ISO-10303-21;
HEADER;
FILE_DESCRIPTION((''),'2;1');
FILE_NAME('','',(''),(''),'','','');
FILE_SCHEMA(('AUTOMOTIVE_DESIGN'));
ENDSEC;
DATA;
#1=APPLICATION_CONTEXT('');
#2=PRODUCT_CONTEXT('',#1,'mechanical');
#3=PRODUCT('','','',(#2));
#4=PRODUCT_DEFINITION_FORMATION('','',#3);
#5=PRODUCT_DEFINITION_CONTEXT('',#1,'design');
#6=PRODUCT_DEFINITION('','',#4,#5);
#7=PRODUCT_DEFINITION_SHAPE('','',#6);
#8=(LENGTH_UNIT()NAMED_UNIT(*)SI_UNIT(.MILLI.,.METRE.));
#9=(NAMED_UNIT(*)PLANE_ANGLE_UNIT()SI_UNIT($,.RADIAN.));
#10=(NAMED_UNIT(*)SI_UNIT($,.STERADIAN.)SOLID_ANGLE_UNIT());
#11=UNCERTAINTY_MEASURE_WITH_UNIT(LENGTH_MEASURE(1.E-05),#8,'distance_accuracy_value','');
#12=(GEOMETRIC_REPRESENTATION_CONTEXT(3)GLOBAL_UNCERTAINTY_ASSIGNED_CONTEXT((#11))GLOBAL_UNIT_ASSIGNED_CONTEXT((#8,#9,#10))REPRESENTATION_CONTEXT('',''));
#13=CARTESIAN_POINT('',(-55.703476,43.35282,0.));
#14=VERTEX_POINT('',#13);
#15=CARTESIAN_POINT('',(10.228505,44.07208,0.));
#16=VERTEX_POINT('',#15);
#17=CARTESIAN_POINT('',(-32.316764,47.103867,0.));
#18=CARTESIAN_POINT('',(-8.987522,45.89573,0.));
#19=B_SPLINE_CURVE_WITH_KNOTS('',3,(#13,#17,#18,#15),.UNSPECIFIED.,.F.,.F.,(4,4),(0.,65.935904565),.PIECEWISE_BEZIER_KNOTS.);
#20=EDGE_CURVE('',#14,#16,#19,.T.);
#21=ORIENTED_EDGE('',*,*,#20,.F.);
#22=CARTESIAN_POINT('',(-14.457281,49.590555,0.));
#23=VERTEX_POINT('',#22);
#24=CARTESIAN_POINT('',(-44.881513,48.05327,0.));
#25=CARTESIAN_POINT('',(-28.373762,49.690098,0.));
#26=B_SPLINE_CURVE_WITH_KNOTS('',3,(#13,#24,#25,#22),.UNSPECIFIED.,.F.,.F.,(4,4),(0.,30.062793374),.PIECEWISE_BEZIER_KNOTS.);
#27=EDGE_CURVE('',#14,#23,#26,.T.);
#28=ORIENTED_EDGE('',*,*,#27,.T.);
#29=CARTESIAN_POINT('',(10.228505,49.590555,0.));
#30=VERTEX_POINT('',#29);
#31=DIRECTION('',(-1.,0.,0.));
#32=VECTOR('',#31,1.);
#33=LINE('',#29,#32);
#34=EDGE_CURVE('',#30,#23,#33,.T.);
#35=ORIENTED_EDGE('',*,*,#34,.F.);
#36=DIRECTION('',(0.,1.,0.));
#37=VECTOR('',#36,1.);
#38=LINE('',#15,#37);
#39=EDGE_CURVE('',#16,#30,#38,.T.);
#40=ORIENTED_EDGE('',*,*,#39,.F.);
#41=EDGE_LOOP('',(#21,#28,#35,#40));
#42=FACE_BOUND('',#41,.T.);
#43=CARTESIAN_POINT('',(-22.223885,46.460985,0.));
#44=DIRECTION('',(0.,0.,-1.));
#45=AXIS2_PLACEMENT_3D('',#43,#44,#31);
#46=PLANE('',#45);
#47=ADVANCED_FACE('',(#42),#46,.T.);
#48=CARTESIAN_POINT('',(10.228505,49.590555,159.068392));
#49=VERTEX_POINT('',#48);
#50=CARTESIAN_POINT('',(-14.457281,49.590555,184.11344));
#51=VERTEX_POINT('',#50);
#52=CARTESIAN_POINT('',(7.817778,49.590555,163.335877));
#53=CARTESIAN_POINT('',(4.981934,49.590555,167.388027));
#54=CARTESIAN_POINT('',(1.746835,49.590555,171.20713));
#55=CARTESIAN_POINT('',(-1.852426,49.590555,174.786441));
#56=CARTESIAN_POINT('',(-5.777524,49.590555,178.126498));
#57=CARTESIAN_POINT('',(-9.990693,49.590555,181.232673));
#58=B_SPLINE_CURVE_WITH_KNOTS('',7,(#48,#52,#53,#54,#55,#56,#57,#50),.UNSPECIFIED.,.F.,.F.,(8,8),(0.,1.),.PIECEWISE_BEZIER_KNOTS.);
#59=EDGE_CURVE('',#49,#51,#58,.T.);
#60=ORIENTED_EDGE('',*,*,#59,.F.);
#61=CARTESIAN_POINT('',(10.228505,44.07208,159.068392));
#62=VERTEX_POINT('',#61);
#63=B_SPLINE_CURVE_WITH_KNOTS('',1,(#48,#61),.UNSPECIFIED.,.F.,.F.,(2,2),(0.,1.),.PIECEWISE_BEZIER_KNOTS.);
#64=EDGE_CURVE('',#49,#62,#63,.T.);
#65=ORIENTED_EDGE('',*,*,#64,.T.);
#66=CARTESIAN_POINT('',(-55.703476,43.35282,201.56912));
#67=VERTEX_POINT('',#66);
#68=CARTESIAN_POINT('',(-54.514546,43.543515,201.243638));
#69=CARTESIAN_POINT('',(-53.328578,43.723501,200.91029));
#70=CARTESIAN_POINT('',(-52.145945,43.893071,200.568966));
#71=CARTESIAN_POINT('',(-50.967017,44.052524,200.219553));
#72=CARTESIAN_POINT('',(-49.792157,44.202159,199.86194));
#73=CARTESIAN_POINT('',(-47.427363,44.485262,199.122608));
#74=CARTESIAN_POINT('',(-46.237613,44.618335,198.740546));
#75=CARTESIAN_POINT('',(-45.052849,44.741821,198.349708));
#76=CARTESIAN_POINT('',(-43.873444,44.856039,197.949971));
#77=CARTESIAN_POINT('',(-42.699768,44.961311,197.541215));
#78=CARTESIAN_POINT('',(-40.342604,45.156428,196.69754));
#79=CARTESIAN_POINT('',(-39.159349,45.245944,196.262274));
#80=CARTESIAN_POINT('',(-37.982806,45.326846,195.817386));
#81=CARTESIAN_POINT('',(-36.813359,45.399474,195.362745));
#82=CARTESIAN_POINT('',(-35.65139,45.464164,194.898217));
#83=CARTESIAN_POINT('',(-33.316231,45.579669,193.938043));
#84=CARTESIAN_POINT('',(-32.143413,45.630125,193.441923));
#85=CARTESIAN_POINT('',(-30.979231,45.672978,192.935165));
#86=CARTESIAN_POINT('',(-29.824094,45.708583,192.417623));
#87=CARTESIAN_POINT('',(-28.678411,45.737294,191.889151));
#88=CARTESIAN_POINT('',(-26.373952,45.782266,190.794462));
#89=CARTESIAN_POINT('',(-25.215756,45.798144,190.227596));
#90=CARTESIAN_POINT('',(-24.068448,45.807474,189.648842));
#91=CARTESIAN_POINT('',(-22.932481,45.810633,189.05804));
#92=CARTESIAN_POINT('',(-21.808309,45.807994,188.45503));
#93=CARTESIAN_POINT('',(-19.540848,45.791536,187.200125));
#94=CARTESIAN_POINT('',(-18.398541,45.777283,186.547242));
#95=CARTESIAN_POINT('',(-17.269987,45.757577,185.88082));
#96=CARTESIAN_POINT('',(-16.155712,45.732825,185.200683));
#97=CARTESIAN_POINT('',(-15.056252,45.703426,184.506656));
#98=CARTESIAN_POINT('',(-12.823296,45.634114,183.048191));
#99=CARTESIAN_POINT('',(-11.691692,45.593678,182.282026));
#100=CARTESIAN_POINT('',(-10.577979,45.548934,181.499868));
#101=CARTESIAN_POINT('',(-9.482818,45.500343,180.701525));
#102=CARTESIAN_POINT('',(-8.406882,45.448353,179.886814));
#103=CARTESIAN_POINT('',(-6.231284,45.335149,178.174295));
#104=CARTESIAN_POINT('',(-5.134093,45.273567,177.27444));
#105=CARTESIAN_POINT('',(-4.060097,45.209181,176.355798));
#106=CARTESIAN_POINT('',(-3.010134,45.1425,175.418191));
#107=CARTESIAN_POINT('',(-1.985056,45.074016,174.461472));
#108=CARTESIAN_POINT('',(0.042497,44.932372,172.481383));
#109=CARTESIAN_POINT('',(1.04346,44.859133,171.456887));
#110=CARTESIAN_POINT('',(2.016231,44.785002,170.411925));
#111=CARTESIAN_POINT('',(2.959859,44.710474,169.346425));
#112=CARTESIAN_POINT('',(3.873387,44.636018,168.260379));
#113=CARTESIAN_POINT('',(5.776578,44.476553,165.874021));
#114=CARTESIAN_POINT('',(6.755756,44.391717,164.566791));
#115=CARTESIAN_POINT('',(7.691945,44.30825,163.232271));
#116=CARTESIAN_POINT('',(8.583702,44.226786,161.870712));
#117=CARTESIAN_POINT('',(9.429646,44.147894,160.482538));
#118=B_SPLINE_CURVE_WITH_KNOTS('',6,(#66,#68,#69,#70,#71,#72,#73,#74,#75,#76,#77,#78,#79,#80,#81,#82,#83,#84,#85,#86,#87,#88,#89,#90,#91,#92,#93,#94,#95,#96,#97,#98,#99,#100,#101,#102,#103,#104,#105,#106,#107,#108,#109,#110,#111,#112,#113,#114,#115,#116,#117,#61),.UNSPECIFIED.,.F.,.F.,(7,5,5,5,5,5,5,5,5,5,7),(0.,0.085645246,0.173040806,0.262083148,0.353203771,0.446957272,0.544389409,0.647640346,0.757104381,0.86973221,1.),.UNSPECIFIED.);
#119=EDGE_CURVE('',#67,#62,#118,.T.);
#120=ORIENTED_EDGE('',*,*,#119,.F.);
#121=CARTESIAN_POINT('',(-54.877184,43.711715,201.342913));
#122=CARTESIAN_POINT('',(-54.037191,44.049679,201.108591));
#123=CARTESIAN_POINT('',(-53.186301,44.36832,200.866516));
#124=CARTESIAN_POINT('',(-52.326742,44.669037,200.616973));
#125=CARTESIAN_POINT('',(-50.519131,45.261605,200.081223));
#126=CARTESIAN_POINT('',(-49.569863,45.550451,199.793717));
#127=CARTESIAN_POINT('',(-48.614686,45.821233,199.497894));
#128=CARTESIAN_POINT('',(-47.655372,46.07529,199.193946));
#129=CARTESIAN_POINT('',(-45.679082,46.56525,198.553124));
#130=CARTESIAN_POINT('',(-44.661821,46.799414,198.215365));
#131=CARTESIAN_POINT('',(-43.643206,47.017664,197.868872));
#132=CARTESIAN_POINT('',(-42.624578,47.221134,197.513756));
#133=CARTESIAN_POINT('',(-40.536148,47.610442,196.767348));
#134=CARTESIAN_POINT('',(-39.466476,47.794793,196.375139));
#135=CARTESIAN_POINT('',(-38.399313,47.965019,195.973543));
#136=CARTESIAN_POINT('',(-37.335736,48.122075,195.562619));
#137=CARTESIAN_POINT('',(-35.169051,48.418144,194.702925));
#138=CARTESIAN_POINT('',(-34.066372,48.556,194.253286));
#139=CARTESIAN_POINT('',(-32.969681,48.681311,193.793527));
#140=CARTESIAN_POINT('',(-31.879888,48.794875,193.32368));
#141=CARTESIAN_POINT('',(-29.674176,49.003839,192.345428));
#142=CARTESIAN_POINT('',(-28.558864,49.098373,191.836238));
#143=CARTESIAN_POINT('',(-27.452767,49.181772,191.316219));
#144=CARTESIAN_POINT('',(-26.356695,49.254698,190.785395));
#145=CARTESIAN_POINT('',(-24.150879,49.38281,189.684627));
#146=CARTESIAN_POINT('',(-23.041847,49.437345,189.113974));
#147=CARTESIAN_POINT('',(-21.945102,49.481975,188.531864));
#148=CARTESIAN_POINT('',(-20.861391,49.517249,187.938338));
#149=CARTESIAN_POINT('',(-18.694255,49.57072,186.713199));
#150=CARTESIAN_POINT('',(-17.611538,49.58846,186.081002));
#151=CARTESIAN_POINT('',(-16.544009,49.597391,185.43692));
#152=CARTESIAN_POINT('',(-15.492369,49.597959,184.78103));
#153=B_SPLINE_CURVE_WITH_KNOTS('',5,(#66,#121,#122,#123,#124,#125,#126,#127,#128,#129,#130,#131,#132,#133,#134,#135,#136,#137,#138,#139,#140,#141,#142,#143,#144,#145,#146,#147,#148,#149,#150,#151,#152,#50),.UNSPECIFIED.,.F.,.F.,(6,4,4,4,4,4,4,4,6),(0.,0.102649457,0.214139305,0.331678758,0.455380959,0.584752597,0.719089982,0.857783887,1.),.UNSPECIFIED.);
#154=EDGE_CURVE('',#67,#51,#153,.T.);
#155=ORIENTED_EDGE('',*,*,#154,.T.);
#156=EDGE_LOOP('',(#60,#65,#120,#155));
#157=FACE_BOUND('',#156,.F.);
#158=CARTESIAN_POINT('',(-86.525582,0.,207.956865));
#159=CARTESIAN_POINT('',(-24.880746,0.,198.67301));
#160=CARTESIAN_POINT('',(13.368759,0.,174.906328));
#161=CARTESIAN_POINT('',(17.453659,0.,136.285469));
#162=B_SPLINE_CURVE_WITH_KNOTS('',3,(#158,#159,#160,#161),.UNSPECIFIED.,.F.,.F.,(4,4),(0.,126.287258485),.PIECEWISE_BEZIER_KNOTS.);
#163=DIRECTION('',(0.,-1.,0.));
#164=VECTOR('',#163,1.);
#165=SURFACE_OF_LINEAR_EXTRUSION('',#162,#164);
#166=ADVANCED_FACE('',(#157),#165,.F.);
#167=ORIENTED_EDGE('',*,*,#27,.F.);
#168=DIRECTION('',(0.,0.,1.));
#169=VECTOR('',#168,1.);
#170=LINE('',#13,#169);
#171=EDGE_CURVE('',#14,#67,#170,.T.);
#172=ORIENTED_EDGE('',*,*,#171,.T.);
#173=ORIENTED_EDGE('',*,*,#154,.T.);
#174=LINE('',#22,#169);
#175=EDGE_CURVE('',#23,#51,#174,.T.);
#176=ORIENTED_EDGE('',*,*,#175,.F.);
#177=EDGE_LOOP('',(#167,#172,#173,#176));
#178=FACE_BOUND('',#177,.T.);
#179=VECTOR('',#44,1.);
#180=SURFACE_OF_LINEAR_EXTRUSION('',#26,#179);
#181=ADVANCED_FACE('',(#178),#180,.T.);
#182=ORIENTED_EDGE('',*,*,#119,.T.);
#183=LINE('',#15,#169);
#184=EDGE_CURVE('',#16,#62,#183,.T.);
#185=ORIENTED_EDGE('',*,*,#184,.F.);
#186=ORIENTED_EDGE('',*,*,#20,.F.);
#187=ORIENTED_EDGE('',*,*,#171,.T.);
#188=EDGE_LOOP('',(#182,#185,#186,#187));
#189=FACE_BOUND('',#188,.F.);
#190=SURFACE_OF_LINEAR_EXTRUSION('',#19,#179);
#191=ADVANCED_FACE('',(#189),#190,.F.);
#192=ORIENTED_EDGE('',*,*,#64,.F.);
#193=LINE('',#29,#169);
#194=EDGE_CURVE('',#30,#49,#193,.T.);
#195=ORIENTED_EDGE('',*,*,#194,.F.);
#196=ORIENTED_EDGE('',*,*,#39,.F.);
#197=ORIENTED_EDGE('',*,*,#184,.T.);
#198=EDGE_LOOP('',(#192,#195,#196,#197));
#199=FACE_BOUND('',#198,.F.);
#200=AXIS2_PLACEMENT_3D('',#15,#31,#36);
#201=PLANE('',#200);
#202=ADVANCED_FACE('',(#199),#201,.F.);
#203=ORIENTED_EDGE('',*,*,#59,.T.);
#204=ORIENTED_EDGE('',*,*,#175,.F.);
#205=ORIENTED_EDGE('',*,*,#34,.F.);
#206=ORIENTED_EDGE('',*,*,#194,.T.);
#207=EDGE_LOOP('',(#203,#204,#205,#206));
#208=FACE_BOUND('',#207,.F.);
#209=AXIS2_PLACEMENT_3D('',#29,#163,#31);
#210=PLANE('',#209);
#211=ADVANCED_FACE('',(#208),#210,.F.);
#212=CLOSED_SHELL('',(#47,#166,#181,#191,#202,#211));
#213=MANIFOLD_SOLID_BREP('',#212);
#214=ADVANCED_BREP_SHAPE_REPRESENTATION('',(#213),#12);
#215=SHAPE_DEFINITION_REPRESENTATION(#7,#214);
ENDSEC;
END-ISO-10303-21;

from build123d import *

# Parameters (mm, degrees)
F1_DEPTH = 203.2
F3_DEPTH = 156.21


with BuildPart() as f1:
    # F0 (on Top) → F1 (new body)
    with BuildSketch(Plane.XY):
        with BuildLine():
            add(Edge.make_bspline(
                [(-55.7034760714, 43.3528199792), (-44.8815132724, 48.0532698058), (-28.3737618921, 49.6900983133), (-14.4572808843, 49.5905550092)],
                knots=[0, 0, 0, 0, 30.0627933739, 30.0627933739, 30.0627933739, 30.0627933739], degree=3))
            add(Edge.make_bspline(
                [(-55.7034760714, 43.3528199792), (-32.3167637629, 47.1038674269), (-8.9875221509, 45.8957304569), (10.2285053581, 44.0720804036)],
                knots=[0, 0, 0, 0, 65.9359045648, 65.9359045648, 65.9359045648, 65.9359045648], degree=3))
            Line((10.2285053581, 44.0720804036), (10.2285053581, 46.4467329389))
            add(Edge.make_bspline(
                [(-14.4572808843, 49.5905550092), (-2.7583239734, 49.5068734503), (7.109380778, 48.1960970026), (10.2285053581, 46.4467329389)],
                knots=[30.0627933739, 30.0627933739, 30.0627933739, 30.0627933739, 55.3352256868, 55.3352256868, 55.3352256868, 55.3352256868], degree=3))
        make_face()
        with BuildLine():
            Line((10.2285053581, 49.5905550092), (-14.4572808843, 49.5905550092))
            add(Edge.make_bspline(
                [(-14.4572808843, 49.5905550092), (-2.7583239734, 49.5068734503), (7.109380778, 48.1960970026), (10.2285053581, 46.4467329389)],
                knots=[30.0627933739, 30.0627933739, 30.0627933739, 30.0627933739, 55.3352256868, 55.3352256868, 55.3352256868, 55.3352256868], degree=3))
            Line((10.2285053581, 46.4467329389), (10.2285053581, 49.5905550092))
        make_face()
    extrude(amount=F1_DEPTH)

    # F2 (on Front) → F3 (cut)
    with BuildSketch(Plane.XZ):
        with BuildLine():
            Line((61.6448372602, 207.9568654299), (-86.5255817771, 207.9568654299))
            add(Edge.make_bspline(
                [(-86.5255817771, 207.9568654299), (-24.8807463795, 198.6730098724), (13.3687593043, 174.9063283205), (17.4536593258, 136.285468936)],
                knots=[0, 0, 0, 0, 126.2872584853, 126.2872584853, 126.2872584853, 126.2872584853], degree=3))
            Line((17.4536593258, 136.285468936), (61.6448372602, 207.9568654299))
        make_face()
    extrude(amount=-F3_DEPTH, mode=Mode.SUBTRACT)


solid = f1.part
